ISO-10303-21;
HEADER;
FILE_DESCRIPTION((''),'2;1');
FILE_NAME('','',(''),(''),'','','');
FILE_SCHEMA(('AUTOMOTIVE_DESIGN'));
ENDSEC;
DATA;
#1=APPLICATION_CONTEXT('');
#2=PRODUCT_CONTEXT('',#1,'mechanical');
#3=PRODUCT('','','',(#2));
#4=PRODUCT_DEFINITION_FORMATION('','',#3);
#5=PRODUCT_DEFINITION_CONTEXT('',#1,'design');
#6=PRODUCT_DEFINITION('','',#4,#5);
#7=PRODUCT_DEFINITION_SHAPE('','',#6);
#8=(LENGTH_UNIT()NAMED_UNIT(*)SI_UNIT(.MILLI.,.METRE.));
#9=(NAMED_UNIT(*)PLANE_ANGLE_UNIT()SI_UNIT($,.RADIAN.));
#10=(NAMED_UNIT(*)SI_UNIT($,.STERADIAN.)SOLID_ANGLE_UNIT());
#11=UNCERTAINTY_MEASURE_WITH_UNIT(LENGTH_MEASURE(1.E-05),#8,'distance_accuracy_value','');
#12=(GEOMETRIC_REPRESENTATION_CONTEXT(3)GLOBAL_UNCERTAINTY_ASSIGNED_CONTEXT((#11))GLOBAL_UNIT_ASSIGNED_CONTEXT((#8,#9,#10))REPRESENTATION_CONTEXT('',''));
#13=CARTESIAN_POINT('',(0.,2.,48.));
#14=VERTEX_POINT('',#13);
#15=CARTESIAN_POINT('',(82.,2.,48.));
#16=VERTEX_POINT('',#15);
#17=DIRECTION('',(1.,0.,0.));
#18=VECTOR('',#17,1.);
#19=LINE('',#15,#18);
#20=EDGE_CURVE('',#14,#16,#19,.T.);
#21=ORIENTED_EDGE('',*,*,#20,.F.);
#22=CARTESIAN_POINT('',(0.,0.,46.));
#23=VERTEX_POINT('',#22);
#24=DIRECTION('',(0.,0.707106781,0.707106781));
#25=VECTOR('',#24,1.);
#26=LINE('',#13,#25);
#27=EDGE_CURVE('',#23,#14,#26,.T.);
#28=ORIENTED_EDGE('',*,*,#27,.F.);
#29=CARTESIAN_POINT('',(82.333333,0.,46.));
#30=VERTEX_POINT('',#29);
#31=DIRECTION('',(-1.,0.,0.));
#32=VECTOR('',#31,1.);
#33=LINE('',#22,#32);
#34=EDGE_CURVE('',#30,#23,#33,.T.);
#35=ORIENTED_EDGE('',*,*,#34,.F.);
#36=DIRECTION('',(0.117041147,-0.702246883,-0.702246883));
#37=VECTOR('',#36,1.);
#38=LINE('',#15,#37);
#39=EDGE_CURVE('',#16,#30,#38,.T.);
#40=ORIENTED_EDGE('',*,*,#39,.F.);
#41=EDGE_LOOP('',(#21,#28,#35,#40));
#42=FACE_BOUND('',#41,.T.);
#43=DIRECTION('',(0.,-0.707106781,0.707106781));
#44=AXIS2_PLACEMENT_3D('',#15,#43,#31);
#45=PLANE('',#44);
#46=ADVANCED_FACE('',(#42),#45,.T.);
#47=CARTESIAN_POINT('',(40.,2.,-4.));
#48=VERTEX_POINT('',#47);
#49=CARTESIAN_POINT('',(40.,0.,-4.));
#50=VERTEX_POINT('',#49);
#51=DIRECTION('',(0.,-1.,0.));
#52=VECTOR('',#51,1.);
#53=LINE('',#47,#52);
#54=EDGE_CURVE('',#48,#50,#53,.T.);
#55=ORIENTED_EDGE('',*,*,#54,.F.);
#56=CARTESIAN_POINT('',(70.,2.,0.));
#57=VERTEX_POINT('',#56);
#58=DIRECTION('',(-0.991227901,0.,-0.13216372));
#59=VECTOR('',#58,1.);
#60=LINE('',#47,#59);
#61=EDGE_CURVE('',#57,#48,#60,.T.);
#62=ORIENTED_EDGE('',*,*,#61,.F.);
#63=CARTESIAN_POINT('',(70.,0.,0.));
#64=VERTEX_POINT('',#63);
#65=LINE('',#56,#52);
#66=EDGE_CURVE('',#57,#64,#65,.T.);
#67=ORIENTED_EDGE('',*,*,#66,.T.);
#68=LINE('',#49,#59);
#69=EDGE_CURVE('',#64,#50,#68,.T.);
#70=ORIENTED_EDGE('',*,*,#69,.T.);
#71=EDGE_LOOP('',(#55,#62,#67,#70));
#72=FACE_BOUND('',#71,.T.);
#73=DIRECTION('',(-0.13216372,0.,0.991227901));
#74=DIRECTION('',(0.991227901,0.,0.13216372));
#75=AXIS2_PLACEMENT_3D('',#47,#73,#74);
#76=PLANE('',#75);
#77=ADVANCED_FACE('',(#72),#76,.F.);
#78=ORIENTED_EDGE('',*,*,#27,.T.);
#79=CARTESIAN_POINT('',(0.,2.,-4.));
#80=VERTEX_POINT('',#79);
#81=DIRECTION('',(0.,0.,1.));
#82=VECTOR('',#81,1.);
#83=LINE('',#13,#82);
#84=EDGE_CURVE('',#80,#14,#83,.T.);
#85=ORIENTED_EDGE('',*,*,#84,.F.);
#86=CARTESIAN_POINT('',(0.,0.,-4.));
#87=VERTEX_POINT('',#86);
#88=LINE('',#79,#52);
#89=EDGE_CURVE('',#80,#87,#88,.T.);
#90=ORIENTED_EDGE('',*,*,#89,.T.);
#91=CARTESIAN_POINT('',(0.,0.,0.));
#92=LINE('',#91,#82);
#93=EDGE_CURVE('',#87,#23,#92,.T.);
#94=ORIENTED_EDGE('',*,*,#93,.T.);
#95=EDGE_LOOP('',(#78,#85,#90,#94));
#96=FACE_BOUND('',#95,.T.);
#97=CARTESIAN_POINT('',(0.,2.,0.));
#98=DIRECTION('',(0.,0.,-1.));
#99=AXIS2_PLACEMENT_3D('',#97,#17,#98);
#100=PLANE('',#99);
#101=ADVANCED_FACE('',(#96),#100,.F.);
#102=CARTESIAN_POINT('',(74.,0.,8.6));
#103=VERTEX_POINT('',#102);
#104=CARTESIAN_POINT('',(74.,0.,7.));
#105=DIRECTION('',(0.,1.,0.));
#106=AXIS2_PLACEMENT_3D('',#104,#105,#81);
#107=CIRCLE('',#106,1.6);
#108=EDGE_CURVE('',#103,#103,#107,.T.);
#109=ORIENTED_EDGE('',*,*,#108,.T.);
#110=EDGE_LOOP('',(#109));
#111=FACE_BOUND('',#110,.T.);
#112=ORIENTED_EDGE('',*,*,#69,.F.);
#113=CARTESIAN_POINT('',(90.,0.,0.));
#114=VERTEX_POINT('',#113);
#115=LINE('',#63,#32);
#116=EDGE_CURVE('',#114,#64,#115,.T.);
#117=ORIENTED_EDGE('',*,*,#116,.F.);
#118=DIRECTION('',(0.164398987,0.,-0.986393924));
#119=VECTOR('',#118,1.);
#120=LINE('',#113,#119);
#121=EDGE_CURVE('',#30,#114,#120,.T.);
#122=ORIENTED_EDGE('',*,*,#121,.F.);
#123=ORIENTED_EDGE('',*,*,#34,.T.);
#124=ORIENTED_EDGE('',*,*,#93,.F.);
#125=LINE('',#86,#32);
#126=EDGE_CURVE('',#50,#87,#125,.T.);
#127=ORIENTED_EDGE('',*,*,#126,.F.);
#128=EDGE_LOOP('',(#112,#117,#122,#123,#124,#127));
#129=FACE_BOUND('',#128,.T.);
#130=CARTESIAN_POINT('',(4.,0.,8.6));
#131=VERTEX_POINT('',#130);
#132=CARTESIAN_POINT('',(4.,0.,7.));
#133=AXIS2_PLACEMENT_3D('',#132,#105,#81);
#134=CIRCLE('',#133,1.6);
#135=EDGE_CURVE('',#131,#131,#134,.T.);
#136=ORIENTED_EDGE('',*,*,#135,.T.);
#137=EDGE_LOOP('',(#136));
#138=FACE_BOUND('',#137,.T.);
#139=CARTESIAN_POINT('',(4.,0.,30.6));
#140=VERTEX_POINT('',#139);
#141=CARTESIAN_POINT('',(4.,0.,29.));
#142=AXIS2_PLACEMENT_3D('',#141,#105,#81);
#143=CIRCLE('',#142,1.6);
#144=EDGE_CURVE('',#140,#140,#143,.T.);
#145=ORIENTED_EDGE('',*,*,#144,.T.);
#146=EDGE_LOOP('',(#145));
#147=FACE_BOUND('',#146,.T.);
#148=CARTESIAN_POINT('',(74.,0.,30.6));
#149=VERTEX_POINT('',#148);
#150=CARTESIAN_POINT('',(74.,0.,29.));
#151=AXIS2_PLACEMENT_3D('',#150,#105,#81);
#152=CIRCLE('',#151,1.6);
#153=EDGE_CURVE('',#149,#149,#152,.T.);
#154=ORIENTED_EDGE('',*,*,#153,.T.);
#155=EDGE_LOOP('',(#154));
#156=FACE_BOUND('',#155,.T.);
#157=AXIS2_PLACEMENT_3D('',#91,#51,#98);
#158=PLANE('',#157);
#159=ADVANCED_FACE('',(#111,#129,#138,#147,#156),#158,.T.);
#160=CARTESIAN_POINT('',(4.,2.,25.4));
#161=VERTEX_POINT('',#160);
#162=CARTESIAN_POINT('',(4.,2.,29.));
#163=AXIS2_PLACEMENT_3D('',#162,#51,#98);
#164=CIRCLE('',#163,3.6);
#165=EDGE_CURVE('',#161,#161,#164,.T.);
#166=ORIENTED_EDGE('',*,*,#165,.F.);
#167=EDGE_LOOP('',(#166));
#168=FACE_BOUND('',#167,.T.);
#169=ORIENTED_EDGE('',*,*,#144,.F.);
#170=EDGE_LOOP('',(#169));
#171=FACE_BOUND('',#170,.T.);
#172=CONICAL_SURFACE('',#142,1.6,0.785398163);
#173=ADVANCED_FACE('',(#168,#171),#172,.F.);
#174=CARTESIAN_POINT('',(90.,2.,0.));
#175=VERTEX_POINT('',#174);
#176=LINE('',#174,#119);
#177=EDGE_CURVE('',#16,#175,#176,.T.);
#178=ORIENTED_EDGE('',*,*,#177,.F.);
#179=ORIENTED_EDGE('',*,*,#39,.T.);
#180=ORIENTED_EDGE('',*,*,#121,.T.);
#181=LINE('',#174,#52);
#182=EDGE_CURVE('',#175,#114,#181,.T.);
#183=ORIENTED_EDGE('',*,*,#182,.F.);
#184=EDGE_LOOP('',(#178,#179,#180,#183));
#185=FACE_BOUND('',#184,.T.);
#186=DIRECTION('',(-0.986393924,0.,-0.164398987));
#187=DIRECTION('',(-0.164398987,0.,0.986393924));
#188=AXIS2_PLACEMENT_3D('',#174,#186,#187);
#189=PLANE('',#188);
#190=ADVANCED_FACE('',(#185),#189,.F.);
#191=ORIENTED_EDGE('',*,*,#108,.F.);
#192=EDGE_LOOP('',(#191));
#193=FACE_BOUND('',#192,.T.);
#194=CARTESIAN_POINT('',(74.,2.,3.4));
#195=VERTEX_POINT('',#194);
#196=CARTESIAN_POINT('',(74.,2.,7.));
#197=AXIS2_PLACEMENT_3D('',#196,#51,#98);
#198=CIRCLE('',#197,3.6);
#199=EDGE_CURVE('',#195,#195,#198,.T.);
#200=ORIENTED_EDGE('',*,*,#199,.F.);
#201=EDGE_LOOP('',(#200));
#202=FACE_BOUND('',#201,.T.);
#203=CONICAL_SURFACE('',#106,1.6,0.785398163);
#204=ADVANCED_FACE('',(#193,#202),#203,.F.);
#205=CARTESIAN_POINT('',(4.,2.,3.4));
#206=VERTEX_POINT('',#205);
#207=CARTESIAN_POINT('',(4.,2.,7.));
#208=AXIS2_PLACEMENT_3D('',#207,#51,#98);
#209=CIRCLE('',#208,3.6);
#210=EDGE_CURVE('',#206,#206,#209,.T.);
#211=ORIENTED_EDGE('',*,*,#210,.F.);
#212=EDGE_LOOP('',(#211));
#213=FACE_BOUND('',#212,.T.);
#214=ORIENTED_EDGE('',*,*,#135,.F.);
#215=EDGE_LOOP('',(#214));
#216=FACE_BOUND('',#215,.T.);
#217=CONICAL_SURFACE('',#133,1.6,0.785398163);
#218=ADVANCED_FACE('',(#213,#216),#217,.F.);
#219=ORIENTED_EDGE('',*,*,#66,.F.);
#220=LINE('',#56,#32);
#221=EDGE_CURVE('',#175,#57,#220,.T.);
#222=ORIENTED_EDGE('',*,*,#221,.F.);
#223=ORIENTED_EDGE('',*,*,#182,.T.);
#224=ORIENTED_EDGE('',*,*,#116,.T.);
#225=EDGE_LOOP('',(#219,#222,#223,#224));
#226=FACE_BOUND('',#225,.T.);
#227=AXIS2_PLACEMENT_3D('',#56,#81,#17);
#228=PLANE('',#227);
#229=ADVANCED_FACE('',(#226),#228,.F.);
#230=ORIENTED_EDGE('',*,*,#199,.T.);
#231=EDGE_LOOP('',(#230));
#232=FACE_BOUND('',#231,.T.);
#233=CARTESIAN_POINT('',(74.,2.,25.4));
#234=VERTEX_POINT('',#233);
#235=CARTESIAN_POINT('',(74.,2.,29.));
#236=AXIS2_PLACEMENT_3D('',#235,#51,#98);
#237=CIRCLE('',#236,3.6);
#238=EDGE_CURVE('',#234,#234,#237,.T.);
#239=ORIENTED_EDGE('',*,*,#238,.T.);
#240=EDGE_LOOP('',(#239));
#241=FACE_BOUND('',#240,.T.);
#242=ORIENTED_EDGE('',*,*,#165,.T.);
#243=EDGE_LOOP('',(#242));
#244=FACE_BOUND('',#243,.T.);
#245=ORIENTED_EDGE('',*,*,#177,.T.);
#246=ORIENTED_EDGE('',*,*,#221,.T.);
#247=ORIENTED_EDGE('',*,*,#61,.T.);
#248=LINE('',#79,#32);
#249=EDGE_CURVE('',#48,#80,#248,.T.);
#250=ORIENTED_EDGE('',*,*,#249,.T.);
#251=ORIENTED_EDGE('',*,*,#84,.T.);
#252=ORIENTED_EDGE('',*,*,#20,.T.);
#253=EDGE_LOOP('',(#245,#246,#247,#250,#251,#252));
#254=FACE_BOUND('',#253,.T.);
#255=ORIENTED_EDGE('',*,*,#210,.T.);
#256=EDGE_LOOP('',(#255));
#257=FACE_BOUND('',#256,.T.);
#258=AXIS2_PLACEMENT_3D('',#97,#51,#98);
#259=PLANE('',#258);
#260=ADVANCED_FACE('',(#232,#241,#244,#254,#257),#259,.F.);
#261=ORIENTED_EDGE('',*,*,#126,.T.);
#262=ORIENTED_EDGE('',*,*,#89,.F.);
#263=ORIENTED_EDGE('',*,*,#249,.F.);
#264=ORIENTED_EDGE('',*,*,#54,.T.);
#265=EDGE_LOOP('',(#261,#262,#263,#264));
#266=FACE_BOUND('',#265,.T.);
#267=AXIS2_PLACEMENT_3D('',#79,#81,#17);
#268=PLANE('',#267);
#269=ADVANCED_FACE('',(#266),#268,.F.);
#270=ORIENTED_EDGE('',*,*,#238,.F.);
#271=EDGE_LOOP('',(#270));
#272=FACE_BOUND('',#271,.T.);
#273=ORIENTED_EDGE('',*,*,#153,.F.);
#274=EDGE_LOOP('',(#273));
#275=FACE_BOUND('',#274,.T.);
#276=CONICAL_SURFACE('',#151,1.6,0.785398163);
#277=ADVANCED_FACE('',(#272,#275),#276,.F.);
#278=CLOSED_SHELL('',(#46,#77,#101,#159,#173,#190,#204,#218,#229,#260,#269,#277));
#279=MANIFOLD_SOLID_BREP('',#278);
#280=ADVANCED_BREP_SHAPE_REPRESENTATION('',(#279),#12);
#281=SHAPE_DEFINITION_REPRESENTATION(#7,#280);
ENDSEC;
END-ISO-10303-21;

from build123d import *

# Parameters (mm, degrees)
BOSS_EXTRUDE1_DEPTH = 2
CHAMFER1_SIZE       = 2
SKETCH2_R           = 1.6
CUT_EXTRUDE1_DEPTH  = 103.019605959
CHAMFER2_SIZE       = 2


with BuildPart() as part:
    # Sketch1 → Boss-Extrude1 (new body)
    with BuildSketch(Plane(origin=(0, 0, 0), x_dir=(1, 0, 0), z_dir=(0, 1, 0))):
        Polygon((0, 0), (0, 4), (40, 4), (70, 0), (90, 0), (82, -48), (0, -48), align=None)
    extrude(amount=BOSS_EXTRUDE1_DEPTH)

    # Chamfer1
    chamfer1_edges = [part.edges().sort_by_distance(p)[0] for p in [
        (41, 0, 48),
    ]]
    chamfer(chamfer1_edges, length=CHAMFER1_SIZE - 0.0001)  # a hair under: the kernel refuses the full size

    # Sketch2 → Cut-Extrude1 (cut, through all)
    with BuildSketch(Plane(origin=(0, 2, 0), x_dir=(1, 0, 0), z_dir=(0, 1, 0))):
        with Locations(Location((4, -7, 0), (0, 0, 270))):
            Circle(SKETCH2_R)
        with Locations(Location((4, -29, 0), (0, 0, 270))):
            Circle(SKETCH2_R)
        with Locations(Location((74, -7, 0), (0, 0, 270))):
            Circle(SKETCH2_R)
        with Locations(Location((74, -29, 0), (0, 0, 270))):
            Circle(SKETCH2_R)
    extrude(amount=-CUT_EXTRUDE1_DEPTH, mode=Mode.SUBTRACT)

    # Chamfer2
    chamfer2_edges = [part.edges().sort_by_distance(p)[0] for p in [
        (4, 2, 27.4),
        (74, 2, 5.4),
        (74, 2, 27.4),
        (4, 2, 5.4),
    ]]
    chamfer(chamfer2_edges, length=CHAMFER2_SIZE - 0.0001)  # a hair under: the kernel refuses the full size


solid = part.part
